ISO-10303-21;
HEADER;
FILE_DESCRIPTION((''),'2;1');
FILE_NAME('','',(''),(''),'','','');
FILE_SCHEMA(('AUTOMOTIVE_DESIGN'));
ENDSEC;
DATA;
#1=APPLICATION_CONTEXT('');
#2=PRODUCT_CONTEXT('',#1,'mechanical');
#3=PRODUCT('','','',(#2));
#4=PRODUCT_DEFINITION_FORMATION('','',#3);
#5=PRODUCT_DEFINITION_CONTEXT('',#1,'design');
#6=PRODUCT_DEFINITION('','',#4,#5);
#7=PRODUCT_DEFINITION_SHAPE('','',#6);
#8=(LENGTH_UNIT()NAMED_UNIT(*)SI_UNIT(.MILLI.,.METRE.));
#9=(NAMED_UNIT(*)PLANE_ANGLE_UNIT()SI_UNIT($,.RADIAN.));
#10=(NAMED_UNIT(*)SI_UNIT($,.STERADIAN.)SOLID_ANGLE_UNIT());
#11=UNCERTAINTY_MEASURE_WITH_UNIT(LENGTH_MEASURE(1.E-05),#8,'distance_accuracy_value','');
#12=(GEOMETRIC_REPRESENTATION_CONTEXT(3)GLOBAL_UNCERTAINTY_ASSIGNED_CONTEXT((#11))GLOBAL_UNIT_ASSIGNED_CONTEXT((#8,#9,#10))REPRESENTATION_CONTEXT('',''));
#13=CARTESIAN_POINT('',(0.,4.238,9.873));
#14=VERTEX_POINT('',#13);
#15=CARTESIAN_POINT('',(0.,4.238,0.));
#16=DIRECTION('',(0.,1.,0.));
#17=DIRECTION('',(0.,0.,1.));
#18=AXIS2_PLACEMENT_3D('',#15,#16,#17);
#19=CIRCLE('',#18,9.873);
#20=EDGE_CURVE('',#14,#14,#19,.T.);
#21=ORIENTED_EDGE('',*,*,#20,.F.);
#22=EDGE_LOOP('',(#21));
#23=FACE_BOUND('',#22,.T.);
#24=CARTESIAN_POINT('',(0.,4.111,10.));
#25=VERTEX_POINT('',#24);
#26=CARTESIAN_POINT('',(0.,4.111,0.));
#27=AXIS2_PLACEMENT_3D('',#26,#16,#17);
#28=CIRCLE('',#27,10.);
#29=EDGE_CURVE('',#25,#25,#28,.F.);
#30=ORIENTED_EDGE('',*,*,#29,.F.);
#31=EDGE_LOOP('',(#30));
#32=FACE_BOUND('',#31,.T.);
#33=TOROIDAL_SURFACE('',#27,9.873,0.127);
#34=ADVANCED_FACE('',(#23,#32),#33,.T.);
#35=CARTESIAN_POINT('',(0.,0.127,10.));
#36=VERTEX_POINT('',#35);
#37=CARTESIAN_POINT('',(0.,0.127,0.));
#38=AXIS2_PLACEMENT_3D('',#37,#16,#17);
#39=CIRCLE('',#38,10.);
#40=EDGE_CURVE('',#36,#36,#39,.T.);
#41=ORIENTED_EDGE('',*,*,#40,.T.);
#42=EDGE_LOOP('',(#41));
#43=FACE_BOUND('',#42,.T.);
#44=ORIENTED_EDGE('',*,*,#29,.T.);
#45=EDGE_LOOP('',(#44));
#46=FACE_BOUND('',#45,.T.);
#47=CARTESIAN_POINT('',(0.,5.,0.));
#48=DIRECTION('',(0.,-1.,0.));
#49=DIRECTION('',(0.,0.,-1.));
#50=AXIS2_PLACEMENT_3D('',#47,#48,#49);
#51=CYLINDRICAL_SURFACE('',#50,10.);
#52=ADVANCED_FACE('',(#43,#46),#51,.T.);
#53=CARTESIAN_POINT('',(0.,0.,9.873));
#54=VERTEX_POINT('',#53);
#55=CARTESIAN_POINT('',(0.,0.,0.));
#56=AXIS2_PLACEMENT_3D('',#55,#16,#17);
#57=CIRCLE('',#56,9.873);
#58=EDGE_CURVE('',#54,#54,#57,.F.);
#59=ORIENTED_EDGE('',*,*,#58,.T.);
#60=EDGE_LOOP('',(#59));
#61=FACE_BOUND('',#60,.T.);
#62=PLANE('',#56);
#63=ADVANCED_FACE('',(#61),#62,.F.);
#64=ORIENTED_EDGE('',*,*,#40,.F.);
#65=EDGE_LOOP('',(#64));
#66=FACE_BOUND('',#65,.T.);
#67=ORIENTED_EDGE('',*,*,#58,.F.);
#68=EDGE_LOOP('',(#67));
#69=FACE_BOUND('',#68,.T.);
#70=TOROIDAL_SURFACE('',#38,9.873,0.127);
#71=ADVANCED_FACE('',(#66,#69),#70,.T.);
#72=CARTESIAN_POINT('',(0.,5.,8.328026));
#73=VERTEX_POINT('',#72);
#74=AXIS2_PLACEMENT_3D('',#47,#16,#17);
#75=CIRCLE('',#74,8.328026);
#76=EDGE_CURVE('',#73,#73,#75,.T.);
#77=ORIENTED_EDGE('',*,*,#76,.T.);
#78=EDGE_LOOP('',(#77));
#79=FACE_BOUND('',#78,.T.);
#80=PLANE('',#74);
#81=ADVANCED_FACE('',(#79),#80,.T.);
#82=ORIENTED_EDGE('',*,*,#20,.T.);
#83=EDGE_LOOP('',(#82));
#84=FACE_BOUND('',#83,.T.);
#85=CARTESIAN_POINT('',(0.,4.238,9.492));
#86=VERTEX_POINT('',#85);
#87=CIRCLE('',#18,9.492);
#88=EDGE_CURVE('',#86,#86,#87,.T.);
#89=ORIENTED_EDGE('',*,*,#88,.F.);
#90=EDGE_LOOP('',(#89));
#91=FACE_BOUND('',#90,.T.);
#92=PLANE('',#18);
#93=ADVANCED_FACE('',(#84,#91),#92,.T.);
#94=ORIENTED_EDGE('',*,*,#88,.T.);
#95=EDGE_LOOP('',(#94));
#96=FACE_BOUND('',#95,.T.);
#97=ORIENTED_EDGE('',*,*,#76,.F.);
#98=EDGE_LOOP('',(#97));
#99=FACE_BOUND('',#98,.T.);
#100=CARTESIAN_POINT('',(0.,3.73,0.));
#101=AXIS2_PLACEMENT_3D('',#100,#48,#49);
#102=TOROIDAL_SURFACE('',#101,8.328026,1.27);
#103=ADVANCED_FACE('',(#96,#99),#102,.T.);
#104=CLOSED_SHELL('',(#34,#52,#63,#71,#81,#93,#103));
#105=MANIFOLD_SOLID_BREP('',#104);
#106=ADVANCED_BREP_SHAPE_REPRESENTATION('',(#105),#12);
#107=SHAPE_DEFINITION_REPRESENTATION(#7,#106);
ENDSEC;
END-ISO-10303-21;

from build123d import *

# Parameters (mm, degrees)
SKETCH1_R           = 10
BOSS_EXTRUDE1_DEPTH = 5
CUT_EXTRUDE1_START  = -0.762
SKETCH2_R           = 10
SKETCH2_R_2         = 9.492
CUT_EXTRUDE1_DEPTH  = 0.762
FILLET3_R           = 1.27
FILLET2_R           = 0.127


with BuildPart() as part:
    # Sketch1 → Boss-Extrude1 (new body)
    with BuildSketch(Plane(origin=(0, 0, 0), x_dir=(1, 0, 0), z_dir=(0, 1, 0))):
        with Locations(Location((0, 0, 0), (0, 0, 270))):
            Circle(SKETCH1_R)
    extrude(amount=BOSS_EXTRUDE1_DEPTH)

    # Sketch2 → Cut-Extrude1 (cut)
    with BuildSketch(Plane(origin=(0, 5, 0), x_dir=(1, 0, 0), z_dir=(0, 1, 0)).offset(CUT_EXTRUDE1_START)):
        with Locations(Location((0, 0, 0), (0, 0, 270))):
            Circle(SKETCH2_R)
        with Locations(Location((0, 0, 0), (0, 0, 270))):
            Circle(SKETCH2_R_2, mode=Mode.SUBTRACT)
    extrude(amount=CUT_EXTRUDE1_DEPTH, mode=Mode.SUBTRACT)

    # Fillet3
    # the kernel refuses this fillet: 1.27 mm, written as the material it takes off along each edge
    with BuildSketch(Plane(origin=(0, 5, 0), x_dir=(0, 0, 1), z_dir=(-1, 0, 0))) as fillet3_piece_1:
        with BuildLine():
            CenterArc((8.328025773, -1.27), FILLET3_R, 23.578178478, 66.421821522)
            Line((8.328025773, 0), (8.328025773, 0.0254))
            Line((8.328025773, 0.0254), (9.492, 0.0254))
            Line((9.492, 0.0254), (9.5174, 0))
            ThreePointArc((9.5174, 0), (9.5174, -0.381), (9.515279485, -0.75184))
            Line((9.515279485, -0.75184), (9.492, -0.762))
        make_face()
    revolve(axis=Axis((0, 5, 0), (0, 1, 0)), mode=Mode.SUBTRACT)

    # Fillet2
    fillet2_edges = [part.edges().sort_by_distance(p)[0] for p in [
        (0, 0, -10),
        (0, 4.238, -10),
    ]]
    fillet(fillet2_edges, radius=FILLET2_R)


solid = part.part
